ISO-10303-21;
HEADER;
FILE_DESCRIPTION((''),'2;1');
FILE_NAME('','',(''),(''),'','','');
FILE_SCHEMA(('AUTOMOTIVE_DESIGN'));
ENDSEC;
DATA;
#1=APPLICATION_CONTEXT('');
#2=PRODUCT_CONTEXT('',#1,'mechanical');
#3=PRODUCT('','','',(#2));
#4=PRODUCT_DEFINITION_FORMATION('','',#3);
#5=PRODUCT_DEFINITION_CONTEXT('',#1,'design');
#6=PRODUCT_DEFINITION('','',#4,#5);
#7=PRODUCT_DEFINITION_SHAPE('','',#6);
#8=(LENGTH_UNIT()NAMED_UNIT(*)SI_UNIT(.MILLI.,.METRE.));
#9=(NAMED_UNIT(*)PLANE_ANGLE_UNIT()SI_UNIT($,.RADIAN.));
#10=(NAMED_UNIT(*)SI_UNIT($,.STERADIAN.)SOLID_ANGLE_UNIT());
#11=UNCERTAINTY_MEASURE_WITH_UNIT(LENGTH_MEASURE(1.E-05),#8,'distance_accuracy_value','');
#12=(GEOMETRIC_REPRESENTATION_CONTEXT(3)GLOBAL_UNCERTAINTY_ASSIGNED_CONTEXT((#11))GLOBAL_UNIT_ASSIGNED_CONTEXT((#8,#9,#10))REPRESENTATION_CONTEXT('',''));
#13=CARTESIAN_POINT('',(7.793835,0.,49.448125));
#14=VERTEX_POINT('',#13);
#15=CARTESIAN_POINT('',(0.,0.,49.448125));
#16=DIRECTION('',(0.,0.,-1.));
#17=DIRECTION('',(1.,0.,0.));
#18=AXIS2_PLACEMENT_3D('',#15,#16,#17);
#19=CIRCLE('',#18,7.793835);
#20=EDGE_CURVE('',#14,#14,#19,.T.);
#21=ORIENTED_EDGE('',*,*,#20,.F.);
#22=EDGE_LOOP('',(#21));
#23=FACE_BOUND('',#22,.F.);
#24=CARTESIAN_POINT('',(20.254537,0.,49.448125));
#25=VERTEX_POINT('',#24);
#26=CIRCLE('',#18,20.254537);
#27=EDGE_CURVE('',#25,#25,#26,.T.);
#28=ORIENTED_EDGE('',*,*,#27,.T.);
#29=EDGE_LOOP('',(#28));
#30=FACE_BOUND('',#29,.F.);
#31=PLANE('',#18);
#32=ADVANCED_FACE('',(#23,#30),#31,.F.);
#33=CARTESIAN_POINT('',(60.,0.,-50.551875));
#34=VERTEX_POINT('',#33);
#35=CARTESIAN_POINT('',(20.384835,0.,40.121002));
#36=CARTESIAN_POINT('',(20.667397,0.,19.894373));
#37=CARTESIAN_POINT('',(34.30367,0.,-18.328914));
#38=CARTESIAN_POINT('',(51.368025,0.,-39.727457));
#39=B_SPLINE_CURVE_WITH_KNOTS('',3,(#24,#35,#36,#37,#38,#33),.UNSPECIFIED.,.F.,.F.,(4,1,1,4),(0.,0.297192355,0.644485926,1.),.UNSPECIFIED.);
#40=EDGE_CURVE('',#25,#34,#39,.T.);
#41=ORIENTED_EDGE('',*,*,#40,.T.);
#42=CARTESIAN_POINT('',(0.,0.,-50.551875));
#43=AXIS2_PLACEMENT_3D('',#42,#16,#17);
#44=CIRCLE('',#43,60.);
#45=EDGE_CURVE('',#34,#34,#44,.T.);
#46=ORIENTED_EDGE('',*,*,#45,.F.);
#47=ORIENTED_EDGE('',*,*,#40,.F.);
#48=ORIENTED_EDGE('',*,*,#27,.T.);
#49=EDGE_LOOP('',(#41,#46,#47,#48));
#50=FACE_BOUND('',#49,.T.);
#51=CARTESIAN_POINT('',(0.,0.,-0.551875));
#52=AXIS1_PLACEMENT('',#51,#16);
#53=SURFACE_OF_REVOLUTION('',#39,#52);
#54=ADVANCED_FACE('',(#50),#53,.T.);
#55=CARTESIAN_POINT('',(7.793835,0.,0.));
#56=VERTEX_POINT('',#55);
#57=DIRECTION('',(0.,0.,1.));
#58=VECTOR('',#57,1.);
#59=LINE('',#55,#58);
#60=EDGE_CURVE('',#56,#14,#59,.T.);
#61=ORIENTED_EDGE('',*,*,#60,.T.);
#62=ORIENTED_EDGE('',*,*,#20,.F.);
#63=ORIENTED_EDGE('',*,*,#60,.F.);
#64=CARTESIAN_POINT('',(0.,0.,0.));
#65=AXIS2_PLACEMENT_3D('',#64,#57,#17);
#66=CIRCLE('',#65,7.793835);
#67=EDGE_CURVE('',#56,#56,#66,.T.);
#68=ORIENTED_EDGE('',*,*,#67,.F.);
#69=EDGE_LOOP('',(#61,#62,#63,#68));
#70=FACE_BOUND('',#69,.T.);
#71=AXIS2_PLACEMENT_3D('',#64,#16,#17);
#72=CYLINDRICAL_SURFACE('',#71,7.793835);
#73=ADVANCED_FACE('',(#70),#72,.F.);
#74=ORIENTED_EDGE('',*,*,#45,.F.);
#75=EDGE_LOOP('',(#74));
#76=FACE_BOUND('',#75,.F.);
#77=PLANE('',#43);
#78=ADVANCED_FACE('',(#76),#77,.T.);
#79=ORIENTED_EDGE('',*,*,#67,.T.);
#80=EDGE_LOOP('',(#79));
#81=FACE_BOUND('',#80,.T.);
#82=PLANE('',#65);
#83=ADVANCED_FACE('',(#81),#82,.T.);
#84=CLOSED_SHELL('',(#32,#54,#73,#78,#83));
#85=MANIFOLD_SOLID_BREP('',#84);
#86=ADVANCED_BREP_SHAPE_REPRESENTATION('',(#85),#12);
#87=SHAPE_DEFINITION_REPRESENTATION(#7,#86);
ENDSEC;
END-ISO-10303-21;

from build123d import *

# Parameters (mm, degrees)
F2_R     = 7.7938350574
F3_DEPTH = 100


with BuildPart() as f1:
    # F0 (on Front) → F1 (revolve)
    with BuildSketch(Plane.XZ):
        with BuildLine():
            Line((20.2545374632, 49.4481252445), (0, 49.4481252445))
            Line((0, 49.4481252445), (0, -50.5518747555))
            Line((0, -50.5518747555), (60, -50.5518747555))
            add(Edge.make_bspline(
                [(20.2545374632, 49.4481252445), (20.384835388, 40.1210020342), (20.6673970939, 19.8943725713), (34.3036697283, -18.3289138464), (51.3680245863, -39.7274572848), (60, -50.5518747555)],
                knots=[0, 0, 0, 0, 0.2971923548, 0.6444859261, 1, 1, 1, 1], degree=3))
        make_face()
    revolve(axis=Axis((0, 0, -0.5518747555), (0, 0, -1)))

    # F2 (on Top) → F3 (cut)
    with BuildSketch(Plane.XY):
        Circle(F2_R)
    extrude(amount=F3_DEPTH, mode=Mode.SUBTRACT)


solid = f1.part
